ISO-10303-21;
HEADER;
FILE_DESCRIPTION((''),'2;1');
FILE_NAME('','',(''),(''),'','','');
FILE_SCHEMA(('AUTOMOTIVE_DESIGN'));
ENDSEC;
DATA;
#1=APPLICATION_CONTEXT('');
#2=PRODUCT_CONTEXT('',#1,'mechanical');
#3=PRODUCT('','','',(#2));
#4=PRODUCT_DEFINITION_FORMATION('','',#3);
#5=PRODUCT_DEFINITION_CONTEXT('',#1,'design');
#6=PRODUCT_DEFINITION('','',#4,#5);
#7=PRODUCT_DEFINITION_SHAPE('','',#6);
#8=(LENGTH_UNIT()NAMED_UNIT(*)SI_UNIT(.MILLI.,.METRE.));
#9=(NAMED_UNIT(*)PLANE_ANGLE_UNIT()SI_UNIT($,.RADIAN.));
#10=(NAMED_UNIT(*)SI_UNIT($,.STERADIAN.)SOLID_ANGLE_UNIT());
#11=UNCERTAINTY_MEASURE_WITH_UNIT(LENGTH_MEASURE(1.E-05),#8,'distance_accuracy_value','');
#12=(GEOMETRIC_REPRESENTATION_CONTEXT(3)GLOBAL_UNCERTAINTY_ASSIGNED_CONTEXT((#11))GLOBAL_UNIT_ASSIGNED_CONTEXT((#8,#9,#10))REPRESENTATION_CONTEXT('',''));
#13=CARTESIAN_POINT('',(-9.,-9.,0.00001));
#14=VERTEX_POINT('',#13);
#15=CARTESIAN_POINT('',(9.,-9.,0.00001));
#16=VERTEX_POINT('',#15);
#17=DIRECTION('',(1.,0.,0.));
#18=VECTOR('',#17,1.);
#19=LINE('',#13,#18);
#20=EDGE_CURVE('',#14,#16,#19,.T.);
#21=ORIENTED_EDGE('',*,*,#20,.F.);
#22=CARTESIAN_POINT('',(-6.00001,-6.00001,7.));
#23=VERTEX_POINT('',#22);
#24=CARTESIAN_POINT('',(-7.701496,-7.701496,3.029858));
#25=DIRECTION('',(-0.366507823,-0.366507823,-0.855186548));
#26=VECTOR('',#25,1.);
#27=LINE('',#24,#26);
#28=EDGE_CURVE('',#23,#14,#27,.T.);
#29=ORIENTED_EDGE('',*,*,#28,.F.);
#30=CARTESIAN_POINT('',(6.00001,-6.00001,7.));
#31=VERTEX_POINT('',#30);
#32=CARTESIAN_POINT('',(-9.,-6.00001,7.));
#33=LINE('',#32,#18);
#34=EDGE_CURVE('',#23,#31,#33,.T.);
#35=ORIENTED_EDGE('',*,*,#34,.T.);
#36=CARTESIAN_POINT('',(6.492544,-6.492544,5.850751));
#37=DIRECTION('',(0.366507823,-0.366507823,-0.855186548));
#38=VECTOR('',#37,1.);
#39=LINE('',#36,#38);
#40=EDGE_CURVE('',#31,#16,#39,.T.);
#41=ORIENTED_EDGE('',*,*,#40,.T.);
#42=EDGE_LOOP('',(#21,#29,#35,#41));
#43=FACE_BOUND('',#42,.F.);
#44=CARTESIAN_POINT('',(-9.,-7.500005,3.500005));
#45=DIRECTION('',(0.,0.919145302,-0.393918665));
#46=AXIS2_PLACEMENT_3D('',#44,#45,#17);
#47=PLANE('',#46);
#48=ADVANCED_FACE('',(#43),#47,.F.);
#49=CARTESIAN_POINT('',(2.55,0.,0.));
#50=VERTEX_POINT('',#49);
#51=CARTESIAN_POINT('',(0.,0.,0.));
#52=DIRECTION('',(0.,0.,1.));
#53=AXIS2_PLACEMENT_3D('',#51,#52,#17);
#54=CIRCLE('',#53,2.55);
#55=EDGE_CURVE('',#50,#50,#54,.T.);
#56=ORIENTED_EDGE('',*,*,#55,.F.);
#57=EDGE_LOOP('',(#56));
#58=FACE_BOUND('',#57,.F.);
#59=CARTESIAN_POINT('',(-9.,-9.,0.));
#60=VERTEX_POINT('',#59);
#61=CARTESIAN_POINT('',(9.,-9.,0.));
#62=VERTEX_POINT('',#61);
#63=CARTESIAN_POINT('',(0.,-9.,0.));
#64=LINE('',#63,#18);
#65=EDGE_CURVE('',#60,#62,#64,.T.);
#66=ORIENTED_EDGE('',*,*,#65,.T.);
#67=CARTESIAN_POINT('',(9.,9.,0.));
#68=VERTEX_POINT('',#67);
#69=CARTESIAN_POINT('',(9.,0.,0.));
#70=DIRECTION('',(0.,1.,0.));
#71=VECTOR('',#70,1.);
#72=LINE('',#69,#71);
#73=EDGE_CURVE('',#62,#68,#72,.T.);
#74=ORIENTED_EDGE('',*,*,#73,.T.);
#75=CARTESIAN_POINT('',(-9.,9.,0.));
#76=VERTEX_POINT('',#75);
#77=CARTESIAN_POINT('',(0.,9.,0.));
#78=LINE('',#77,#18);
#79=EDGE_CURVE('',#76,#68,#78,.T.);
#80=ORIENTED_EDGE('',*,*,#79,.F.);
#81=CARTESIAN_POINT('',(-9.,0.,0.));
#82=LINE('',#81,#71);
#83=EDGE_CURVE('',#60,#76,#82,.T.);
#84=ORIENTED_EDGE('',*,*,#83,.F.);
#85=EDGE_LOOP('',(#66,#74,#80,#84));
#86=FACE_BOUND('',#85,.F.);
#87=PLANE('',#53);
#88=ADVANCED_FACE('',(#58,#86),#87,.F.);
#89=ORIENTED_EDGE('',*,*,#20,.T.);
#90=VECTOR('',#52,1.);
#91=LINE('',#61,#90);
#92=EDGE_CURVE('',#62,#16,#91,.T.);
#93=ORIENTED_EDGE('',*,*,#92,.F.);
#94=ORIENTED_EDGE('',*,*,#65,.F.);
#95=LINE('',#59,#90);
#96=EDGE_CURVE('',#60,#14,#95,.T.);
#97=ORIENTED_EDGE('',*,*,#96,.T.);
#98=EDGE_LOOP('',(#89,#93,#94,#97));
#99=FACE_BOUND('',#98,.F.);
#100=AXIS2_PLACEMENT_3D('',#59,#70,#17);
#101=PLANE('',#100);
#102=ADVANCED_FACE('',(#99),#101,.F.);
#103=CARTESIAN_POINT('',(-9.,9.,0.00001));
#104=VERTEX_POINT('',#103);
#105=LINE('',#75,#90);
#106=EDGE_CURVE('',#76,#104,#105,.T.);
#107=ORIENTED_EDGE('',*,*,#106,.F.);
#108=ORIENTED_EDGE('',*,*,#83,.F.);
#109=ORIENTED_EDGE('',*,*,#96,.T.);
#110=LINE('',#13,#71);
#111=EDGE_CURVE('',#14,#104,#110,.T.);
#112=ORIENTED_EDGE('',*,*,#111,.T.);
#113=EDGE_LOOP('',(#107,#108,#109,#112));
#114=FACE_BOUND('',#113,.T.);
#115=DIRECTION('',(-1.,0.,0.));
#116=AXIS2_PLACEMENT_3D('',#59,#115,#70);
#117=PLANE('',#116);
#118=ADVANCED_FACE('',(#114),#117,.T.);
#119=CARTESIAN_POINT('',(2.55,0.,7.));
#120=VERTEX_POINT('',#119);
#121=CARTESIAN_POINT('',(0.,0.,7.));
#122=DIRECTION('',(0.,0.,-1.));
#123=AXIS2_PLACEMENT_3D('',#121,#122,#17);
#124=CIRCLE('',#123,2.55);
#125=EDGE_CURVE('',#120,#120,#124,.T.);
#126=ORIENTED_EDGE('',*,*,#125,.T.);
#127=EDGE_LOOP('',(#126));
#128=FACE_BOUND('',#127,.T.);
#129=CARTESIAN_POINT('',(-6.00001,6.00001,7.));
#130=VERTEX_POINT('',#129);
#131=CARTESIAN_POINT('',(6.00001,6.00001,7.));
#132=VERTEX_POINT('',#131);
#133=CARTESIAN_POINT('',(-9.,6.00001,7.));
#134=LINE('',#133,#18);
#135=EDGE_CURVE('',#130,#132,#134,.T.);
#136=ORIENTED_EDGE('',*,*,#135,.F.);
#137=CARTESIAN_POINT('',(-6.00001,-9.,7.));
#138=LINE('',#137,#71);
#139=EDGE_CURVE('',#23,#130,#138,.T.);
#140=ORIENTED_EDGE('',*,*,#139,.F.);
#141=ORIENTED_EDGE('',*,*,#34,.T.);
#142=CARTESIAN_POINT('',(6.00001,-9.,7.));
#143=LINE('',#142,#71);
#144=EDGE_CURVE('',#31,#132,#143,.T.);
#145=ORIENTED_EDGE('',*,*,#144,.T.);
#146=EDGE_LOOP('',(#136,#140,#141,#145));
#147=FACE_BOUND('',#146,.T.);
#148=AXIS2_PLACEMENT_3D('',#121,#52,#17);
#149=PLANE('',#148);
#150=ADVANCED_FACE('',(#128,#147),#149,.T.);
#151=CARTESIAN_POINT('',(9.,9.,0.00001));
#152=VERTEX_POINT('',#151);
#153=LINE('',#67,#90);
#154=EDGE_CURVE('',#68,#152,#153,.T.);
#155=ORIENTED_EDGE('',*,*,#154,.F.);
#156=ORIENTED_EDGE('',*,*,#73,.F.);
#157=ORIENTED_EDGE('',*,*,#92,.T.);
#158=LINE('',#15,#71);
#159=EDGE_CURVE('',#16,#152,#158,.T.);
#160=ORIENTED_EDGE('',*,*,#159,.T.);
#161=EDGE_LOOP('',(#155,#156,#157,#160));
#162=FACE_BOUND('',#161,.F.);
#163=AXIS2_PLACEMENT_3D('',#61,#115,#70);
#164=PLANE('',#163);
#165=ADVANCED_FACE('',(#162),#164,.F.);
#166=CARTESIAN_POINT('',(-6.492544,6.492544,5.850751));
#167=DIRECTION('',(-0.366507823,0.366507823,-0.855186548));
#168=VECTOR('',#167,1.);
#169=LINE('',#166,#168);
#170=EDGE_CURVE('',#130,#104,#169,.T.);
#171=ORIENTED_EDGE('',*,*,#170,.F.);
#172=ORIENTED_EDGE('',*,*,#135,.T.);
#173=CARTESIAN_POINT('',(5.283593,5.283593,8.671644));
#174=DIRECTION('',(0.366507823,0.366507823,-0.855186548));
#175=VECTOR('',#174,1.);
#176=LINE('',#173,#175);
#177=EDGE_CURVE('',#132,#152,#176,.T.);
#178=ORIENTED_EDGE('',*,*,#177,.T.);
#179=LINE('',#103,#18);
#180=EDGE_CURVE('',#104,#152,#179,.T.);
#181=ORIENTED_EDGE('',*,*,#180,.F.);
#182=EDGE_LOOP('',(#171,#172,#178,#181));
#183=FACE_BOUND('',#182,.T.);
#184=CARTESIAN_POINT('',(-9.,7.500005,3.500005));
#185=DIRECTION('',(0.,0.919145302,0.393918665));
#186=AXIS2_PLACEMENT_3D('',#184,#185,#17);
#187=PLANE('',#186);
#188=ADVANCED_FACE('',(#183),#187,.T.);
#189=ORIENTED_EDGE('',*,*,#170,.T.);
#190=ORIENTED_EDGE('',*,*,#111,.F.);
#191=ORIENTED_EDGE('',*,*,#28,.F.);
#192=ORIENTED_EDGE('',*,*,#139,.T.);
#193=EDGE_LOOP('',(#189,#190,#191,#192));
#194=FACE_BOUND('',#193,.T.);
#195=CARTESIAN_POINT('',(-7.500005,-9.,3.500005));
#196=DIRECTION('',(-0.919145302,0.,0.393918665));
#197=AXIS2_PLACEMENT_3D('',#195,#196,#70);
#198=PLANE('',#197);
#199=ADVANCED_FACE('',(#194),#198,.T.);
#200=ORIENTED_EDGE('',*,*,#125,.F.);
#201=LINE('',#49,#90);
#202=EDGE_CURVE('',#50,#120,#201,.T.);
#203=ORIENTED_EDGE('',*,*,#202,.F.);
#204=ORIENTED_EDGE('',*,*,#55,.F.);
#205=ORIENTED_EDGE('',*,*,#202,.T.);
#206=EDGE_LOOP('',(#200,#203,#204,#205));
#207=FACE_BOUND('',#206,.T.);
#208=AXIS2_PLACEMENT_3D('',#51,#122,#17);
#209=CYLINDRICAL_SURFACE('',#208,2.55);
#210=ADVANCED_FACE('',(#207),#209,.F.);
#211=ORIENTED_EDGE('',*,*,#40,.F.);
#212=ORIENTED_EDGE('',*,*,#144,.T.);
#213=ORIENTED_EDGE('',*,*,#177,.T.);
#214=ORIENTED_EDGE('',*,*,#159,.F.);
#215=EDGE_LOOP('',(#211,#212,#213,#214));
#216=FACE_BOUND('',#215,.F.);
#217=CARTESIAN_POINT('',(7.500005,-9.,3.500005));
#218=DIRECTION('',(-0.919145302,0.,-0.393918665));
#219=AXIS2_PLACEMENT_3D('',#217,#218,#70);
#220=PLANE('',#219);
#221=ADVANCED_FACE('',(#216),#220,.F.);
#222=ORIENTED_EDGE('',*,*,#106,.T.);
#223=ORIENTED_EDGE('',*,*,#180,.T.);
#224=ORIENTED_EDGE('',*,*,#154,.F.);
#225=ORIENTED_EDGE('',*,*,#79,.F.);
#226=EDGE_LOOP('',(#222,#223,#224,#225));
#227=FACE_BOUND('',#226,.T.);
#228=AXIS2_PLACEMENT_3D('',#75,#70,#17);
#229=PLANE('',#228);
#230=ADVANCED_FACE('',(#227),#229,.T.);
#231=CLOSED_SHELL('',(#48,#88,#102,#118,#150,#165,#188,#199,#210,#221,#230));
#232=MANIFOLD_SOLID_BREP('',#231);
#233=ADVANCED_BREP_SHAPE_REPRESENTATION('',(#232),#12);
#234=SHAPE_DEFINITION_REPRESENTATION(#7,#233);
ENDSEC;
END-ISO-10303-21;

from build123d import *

# Parameters (mm, degrees)
F0_W     = 18
F0_H     = 18
F1_DEPTH = 7
F2_SIZE2 = 6.99999
F2_SIZE  = 2.99999
F3_R     = 2.55
F4_DEPTH = 25


# Not quite as in the source:
# - a fillet or chamfer is up to 0.001 mm smaller than in the source, because OpenCascade refuses the exact size


with BuildPart() as f1:
    # F0 (on Top) → F1 (new body)
    with BuildSketch(Plane.XY):
        Rectangle(F0_W, F0_H)
    extrude(amount=F1_DEPTH)

    # F2 (size 3 and 7 in the source; OpenCascade refuses exactly that, so slightly less here)
    f2_edges = [f1.edges().sort_by_distance(p)[0] for p in [
        (-9, 0, 7),
        (0, 9, 7),
        (9, 0, 7),
        (0, -9, 7),
    ]]
    f2_side = f1.faces().sort_by_distance((0, 0, 7))[0]
    chamfer(f2_edges, length=F2_SIZE, length2=F2_SIZE2, reference=f2_side)

    # F3 (on Top) → F4 (cut)
    with BuildSketch(Plane.XY):
        Circle(F3_R)
    extrude(amount=F4_DEPTH, mode=Mode.SUBTRACT)


solid = f1.part
